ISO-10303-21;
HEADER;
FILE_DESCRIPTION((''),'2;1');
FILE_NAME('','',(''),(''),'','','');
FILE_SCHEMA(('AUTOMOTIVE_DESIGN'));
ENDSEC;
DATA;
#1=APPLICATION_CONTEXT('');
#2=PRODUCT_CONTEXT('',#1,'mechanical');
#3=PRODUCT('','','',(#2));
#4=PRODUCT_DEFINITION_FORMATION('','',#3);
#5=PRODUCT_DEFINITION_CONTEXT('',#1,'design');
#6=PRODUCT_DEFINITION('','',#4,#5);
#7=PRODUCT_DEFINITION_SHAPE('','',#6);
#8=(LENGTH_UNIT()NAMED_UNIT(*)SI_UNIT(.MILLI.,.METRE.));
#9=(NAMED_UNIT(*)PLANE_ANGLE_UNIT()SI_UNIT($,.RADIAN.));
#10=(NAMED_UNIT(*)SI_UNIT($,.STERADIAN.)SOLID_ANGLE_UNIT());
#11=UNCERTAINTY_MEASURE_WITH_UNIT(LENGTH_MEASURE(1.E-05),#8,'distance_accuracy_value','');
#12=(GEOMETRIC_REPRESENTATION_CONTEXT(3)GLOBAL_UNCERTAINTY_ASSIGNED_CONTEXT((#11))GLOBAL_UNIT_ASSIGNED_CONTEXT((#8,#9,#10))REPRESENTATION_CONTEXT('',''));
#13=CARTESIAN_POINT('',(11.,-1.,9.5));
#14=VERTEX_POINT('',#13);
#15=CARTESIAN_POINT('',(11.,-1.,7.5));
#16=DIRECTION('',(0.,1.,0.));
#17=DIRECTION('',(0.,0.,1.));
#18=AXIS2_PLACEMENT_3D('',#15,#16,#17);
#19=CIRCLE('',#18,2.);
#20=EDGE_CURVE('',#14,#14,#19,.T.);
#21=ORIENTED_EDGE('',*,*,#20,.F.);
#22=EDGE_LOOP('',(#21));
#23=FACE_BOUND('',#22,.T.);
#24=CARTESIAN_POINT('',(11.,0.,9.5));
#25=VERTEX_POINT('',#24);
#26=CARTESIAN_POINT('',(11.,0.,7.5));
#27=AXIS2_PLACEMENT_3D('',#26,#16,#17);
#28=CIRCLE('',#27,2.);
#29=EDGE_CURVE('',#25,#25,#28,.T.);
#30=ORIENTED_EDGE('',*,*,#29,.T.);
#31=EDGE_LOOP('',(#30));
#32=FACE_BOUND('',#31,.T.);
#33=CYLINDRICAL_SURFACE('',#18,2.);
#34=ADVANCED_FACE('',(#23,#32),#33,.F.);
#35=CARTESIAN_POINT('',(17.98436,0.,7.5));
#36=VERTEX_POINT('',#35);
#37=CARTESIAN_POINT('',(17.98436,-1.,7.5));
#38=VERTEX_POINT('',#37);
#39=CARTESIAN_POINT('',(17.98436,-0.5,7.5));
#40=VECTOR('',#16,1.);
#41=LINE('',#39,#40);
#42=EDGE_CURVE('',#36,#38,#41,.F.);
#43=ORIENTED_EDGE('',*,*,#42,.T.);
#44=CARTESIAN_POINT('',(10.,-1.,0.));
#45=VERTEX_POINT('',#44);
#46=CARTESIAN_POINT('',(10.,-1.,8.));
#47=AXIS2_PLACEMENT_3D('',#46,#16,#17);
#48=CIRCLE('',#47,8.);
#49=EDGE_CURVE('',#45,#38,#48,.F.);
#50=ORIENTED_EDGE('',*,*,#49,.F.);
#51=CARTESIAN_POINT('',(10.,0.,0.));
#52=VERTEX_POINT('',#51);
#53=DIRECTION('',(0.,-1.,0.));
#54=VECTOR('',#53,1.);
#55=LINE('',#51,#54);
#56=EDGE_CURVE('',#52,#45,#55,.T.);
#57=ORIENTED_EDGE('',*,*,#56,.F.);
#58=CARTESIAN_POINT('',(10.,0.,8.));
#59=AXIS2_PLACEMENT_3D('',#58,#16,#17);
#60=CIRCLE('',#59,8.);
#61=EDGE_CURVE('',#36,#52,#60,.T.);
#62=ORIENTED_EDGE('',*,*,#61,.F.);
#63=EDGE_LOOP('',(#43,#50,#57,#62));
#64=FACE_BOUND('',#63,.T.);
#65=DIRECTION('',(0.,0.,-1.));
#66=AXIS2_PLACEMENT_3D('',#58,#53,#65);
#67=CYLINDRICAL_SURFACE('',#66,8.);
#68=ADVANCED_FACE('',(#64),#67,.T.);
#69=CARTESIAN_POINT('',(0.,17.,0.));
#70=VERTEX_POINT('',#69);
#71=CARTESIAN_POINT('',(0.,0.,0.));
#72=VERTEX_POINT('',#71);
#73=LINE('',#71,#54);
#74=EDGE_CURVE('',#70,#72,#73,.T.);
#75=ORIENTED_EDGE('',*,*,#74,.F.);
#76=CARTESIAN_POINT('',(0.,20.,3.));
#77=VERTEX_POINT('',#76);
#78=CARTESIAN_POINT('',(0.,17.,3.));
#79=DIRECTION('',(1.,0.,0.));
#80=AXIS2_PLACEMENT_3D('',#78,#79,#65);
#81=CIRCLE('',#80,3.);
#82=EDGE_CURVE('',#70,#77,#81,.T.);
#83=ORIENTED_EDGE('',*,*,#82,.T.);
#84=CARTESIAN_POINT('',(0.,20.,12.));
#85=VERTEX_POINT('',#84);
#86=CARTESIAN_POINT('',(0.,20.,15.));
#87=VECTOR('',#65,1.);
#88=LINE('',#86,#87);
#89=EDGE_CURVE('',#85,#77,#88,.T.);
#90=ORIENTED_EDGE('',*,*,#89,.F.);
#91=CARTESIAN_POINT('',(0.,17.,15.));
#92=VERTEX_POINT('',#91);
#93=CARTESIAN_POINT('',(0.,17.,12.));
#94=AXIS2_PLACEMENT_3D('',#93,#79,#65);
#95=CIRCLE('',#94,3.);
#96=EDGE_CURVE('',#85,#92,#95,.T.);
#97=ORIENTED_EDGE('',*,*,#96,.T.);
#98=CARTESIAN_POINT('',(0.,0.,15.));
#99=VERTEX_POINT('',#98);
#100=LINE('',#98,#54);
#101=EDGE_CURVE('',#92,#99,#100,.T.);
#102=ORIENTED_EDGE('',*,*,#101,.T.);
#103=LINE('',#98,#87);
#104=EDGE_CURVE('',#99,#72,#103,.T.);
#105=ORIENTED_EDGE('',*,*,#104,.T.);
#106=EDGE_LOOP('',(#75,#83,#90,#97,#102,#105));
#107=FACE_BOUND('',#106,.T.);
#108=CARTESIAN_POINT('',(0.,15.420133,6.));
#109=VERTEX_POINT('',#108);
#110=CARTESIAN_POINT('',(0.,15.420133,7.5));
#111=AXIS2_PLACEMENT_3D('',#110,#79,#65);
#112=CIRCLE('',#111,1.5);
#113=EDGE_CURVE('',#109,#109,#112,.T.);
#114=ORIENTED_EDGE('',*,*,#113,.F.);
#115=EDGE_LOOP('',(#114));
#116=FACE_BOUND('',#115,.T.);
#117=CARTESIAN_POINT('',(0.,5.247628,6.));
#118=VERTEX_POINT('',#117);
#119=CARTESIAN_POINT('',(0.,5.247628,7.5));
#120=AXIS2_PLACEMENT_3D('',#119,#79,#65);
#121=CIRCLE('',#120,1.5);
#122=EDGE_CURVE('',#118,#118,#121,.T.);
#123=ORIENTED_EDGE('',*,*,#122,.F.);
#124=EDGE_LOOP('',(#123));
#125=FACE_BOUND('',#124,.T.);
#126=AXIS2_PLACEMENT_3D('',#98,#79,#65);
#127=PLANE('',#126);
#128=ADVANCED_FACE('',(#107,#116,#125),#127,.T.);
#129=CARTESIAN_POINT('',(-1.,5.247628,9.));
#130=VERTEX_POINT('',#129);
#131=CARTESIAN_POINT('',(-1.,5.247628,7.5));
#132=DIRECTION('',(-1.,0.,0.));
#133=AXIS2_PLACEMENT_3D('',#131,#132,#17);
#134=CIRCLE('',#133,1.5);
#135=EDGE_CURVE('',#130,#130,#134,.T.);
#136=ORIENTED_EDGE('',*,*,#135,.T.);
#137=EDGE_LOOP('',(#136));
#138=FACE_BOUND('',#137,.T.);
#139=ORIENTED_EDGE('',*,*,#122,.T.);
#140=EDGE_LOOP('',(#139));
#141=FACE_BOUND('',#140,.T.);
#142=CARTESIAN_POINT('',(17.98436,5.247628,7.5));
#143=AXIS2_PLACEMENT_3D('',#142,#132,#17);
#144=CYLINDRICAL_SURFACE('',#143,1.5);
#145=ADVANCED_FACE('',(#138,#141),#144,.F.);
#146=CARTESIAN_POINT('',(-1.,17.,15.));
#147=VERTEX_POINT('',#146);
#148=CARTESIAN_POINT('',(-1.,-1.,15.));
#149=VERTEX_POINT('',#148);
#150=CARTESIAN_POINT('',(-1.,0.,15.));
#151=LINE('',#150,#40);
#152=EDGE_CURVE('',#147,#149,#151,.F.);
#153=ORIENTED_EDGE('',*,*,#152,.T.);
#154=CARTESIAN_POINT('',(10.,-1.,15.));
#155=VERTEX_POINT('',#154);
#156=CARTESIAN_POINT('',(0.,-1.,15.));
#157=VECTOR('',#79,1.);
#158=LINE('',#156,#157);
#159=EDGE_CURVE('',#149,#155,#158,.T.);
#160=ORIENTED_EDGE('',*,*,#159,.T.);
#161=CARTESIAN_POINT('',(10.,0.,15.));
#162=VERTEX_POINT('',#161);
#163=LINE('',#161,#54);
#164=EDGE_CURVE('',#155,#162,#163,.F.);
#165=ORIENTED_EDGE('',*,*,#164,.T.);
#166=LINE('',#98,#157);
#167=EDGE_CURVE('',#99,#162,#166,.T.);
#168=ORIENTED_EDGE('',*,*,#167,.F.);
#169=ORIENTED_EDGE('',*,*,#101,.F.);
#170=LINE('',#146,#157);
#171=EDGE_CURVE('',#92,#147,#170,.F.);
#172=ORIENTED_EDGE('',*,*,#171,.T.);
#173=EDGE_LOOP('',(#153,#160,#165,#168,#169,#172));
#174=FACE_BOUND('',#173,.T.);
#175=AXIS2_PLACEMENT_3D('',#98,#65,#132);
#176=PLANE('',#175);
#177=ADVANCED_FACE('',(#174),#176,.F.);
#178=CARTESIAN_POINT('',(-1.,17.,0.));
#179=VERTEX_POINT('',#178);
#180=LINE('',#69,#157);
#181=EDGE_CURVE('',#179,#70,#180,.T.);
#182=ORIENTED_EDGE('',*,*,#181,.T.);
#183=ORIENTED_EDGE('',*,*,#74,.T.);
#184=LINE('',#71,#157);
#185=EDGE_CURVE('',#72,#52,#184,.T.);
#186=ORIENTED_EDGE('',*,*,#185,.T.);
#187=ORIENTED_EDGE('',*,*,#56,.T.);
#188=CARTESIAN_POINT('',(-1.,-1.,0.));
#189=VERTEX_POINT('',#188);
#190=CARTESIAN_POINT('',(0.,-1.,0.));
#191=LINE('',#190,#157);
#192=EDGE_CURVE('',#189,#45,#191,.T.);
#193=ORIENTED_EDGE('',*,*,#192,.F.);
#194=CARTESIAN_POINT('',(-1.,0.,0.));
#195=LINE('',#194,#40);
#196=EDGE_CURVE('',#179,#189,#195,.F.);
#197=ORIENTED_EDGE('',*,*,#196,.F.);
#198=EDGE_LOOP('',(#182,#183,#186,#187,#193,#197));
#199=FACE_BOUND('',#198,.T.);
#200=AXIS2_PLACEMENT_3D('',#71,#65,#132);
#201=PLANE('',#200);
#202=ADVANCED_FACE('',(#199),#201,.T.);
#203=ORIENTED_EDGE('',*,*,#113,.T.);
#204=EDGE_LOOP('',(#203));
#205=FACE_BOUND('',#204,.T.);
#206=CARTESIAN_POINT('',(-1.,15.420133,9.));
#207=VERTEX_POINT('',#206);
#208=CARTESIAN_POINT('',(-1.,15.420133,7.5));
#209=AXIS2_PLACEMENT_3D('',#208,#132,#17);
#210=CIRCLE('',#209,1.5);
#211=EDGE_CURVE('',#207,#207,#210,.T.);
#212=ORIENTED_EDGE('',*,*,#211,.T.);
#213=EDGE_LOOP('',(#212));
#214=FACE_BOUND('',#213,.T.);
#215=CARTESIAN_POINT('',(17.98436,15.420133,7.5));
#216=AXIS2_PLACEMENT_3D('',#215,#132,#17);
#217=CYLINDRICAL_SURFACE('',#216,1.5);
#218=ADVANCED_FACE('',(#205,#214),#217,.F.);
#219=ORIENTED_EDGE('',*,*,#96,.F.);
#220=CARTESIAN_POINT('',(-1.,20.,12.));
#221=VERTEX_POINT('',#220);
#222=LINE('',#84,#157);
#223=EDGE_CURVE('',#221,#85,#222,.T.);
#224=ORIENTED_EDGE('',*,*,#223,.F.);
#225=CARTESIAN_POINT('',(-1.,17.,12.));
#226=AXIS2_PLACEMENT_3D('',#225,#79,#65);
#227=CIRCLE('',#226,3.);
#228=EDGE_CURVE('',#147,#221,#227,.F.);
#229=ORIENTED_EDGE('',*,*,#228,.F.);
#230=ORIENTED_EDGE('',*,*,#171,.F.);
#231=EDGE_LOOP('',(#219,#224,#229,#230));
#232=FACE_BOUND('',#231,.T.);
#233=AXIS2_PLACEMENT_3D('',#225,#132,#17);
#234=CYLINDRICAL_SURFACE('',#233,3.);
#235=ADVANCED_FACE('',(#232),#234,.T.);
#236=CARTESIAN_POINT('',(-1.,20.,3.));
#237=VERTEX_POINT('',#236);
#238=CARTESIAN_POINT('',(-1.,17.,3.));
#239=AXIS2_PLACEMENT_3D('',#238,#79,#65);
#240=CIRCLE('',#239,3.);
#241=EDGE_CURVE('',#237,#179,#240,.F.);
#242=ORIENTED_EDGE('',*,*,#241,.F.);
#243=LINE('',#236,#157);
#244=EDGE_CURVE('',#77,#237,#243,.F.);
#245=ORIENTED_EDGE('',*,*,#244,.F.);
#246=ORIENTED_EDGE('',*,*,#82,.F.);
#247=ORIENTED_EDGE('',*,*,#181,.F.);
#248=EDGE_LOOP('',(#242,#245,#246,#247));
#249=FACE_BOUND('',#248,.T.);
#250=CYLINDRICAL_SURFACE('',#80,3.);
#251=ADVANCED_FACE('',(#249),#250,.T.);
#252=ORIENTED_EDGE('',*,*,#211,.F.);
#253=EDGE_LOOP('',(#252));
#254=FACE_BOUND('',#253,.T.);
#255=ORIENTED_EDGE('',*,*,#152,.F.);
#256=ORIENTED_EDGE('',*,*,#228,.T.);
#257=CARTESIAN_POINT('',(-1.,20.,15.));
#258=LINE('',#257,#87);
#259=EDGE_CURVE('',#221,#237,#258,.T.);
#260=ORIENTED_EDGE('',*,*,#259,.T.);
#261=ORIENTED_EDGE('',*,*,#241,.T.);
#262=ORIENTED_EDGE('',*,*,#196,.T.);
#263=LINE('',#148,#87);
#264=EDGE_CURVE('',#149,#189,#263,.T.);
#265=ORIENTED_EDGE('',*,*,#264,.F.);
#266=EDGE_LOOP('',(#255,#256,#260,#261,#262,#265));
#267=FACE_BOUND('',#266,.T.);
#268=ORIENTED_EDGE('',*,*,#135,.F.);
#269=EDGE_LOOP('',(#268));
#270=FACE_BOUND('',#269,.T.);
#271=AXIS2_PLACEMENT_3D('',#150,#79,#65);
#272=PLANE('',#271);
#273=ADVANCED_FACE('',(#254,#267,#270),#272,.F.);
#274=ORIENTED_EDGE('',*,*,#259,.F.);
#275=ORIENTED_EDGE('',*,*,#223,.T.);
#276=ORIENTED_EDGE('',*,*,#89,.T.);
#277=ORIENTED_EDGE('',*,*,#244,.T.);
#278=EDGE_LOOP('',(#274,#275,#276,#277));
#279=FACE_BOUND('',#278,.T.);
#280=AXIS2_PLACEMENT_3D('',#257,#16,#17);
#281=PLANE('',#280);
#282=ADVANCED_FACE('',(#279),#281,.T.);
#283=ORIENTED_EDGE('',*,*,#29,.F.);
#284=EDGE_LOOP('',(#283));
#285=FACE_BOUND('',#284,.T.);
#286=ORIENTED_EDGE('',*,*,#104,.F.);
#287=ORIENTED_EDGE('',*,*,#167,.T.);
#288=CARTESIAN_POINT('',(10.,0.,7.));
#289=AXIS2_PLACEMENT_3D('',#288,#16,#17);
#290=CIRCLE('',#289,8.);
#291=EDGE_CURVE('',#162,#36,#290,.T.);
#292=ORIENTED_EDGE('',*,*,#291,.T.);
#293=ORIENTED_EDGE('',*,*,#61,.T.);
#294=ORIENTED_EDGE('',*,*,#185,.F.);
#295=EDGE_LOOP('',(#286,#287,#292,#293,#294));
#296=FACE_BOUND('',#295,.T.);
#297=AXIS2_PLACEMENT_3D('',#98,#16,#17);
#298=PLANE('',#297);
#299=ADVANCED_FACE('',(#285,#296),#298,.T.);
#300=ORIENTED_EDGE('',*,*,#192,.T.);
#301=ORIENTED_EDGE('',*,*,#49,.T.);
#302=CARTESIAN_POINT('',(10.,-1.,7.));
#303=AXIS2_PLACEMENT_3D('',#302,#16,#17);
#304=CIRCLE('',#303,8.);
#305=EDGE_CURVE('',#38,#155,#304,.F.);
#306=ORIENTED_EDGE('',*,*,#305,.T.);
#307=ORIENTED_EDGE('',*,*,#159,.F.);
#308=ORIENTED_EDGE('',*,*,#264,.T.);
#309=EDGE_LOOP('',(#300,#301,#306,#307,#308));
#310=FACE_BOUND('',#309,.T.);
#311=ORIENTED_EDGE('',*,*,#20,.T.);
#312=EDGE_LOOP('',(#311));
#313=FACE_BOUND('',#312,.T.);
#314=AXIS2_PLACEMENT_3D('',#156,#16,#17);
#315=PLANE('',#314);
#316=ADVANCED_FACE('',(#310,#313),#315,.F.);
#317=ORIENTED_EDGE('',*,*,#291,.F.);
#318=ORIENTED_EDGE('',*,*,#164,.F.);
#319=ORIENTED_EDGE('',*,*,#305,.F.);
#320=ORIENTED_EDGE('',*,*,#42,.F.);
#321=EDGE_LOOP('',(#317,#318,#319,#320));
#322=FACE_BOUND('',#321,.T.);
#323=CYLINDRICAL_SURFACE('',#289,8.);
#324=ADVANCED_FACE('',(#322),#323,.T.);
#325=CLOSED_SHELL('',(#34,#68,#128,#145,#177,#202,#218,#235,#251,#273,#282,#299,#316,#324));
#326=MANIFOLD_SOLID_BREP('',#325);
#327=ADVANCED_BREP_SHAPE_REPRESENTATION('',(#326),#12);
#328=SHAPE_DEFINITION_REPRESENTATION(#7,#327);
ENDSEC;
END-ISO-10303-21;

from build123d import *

# Parameters (mm, degrees)
EXTRUDE_THIN1_DEPTH = 15
FILLET1_R           = 8
SKETCH2_R           = 1.5
CUT_EXTRUDE1_DEPTH  = 32.391175729
FILLET2_R           = 3
SKETCH3_R           = 2
CUT_EXTRUDE2_DEPTH  = 31.796707523


with BuildPart() as part:
    # Sketch1 → Extrude-Thin1 (new body)
    with BuildSketch(Plane.XY):
        Polygon((18, 0), (0, 0), (0, 20), (-1, 20), (-1, -1), (18, -1), align=None)
    extrude(amount=EXTRUDE_THIN1_DEPTH)

    # Fillet1
    # the kernel refuses this fillet: 8 mm, written as the material it takes off along each edge
    with BuildSketch(Plane(origin=(18, -21, 0), x_dir=(0, 0, 1), z_dir=(0, 1, 0))) as fillet1_piece_1:
        with BuildLine():
            CenterArc((FILLET1_R, -FILLET1_R), FILLET1_R, 90, 90)
            Line((0, -FILLET1_R), (0, 0))
            Line((0, 0), (FILLET1_R, 0))
        make_face()
    extrude(amount=41, mode=Mode.SUBTRACT)
    with BuildSketch(Plane(origin=(18, -21, 15), x_dir=(0, 0, -1), z_dir=(0, 1, 0))) as fillet1_piece_2:
        with BuildLine():
            CenterArc((FILLET1_R, FILLET1_R), FILLET1_R, 180, 90)
            Line((0, FILLET1_R), (0, 0))
            Line((0, 0), (FILLET1_R, 0))
        make_face()
    extrude(amount=41, mode=Mode.SUBTRACT)

    # Sketch2 → Cut-Extrude1 (cut, through all)
    with BuildSketch(Plane.ZY.offset(1)):
        with Locations((7.5, 5.247627846)):
            Circle(SKETCH2_R)
        with Locations((7.5, 15.420132795)):
            Circle(SKETCH2_R)
    extrude(amount=-CUT_EXTRUDE1_DEPTH, mode=Mode.SUBTRACT)

    # Fillet2
    fillet2_edges = [part.edges().sort_by_distance(p)[0] for p in [
        (-0.5, 20, 15),
        (-0.5, 20, 0),
    ]]
    fillet(fillet2_edges, radius=FILLET2_R)

    # Sketch3 → Cut-Extrude2 (cut, through all)
    with BuildSketch(Plane(origin=(0, 0, 0), x_dir=(1, 0, 0), z_dir=(0, 1, 0))):
        with Locations(Location((11, -7.5, 0), (0, 0, 270))):
            Circle(SKETCH3_R)
    extrude(amount=-CUT_EXTRUDE2_DEPTH, mode=Mode.SUBTRACT)


solid = part.part
